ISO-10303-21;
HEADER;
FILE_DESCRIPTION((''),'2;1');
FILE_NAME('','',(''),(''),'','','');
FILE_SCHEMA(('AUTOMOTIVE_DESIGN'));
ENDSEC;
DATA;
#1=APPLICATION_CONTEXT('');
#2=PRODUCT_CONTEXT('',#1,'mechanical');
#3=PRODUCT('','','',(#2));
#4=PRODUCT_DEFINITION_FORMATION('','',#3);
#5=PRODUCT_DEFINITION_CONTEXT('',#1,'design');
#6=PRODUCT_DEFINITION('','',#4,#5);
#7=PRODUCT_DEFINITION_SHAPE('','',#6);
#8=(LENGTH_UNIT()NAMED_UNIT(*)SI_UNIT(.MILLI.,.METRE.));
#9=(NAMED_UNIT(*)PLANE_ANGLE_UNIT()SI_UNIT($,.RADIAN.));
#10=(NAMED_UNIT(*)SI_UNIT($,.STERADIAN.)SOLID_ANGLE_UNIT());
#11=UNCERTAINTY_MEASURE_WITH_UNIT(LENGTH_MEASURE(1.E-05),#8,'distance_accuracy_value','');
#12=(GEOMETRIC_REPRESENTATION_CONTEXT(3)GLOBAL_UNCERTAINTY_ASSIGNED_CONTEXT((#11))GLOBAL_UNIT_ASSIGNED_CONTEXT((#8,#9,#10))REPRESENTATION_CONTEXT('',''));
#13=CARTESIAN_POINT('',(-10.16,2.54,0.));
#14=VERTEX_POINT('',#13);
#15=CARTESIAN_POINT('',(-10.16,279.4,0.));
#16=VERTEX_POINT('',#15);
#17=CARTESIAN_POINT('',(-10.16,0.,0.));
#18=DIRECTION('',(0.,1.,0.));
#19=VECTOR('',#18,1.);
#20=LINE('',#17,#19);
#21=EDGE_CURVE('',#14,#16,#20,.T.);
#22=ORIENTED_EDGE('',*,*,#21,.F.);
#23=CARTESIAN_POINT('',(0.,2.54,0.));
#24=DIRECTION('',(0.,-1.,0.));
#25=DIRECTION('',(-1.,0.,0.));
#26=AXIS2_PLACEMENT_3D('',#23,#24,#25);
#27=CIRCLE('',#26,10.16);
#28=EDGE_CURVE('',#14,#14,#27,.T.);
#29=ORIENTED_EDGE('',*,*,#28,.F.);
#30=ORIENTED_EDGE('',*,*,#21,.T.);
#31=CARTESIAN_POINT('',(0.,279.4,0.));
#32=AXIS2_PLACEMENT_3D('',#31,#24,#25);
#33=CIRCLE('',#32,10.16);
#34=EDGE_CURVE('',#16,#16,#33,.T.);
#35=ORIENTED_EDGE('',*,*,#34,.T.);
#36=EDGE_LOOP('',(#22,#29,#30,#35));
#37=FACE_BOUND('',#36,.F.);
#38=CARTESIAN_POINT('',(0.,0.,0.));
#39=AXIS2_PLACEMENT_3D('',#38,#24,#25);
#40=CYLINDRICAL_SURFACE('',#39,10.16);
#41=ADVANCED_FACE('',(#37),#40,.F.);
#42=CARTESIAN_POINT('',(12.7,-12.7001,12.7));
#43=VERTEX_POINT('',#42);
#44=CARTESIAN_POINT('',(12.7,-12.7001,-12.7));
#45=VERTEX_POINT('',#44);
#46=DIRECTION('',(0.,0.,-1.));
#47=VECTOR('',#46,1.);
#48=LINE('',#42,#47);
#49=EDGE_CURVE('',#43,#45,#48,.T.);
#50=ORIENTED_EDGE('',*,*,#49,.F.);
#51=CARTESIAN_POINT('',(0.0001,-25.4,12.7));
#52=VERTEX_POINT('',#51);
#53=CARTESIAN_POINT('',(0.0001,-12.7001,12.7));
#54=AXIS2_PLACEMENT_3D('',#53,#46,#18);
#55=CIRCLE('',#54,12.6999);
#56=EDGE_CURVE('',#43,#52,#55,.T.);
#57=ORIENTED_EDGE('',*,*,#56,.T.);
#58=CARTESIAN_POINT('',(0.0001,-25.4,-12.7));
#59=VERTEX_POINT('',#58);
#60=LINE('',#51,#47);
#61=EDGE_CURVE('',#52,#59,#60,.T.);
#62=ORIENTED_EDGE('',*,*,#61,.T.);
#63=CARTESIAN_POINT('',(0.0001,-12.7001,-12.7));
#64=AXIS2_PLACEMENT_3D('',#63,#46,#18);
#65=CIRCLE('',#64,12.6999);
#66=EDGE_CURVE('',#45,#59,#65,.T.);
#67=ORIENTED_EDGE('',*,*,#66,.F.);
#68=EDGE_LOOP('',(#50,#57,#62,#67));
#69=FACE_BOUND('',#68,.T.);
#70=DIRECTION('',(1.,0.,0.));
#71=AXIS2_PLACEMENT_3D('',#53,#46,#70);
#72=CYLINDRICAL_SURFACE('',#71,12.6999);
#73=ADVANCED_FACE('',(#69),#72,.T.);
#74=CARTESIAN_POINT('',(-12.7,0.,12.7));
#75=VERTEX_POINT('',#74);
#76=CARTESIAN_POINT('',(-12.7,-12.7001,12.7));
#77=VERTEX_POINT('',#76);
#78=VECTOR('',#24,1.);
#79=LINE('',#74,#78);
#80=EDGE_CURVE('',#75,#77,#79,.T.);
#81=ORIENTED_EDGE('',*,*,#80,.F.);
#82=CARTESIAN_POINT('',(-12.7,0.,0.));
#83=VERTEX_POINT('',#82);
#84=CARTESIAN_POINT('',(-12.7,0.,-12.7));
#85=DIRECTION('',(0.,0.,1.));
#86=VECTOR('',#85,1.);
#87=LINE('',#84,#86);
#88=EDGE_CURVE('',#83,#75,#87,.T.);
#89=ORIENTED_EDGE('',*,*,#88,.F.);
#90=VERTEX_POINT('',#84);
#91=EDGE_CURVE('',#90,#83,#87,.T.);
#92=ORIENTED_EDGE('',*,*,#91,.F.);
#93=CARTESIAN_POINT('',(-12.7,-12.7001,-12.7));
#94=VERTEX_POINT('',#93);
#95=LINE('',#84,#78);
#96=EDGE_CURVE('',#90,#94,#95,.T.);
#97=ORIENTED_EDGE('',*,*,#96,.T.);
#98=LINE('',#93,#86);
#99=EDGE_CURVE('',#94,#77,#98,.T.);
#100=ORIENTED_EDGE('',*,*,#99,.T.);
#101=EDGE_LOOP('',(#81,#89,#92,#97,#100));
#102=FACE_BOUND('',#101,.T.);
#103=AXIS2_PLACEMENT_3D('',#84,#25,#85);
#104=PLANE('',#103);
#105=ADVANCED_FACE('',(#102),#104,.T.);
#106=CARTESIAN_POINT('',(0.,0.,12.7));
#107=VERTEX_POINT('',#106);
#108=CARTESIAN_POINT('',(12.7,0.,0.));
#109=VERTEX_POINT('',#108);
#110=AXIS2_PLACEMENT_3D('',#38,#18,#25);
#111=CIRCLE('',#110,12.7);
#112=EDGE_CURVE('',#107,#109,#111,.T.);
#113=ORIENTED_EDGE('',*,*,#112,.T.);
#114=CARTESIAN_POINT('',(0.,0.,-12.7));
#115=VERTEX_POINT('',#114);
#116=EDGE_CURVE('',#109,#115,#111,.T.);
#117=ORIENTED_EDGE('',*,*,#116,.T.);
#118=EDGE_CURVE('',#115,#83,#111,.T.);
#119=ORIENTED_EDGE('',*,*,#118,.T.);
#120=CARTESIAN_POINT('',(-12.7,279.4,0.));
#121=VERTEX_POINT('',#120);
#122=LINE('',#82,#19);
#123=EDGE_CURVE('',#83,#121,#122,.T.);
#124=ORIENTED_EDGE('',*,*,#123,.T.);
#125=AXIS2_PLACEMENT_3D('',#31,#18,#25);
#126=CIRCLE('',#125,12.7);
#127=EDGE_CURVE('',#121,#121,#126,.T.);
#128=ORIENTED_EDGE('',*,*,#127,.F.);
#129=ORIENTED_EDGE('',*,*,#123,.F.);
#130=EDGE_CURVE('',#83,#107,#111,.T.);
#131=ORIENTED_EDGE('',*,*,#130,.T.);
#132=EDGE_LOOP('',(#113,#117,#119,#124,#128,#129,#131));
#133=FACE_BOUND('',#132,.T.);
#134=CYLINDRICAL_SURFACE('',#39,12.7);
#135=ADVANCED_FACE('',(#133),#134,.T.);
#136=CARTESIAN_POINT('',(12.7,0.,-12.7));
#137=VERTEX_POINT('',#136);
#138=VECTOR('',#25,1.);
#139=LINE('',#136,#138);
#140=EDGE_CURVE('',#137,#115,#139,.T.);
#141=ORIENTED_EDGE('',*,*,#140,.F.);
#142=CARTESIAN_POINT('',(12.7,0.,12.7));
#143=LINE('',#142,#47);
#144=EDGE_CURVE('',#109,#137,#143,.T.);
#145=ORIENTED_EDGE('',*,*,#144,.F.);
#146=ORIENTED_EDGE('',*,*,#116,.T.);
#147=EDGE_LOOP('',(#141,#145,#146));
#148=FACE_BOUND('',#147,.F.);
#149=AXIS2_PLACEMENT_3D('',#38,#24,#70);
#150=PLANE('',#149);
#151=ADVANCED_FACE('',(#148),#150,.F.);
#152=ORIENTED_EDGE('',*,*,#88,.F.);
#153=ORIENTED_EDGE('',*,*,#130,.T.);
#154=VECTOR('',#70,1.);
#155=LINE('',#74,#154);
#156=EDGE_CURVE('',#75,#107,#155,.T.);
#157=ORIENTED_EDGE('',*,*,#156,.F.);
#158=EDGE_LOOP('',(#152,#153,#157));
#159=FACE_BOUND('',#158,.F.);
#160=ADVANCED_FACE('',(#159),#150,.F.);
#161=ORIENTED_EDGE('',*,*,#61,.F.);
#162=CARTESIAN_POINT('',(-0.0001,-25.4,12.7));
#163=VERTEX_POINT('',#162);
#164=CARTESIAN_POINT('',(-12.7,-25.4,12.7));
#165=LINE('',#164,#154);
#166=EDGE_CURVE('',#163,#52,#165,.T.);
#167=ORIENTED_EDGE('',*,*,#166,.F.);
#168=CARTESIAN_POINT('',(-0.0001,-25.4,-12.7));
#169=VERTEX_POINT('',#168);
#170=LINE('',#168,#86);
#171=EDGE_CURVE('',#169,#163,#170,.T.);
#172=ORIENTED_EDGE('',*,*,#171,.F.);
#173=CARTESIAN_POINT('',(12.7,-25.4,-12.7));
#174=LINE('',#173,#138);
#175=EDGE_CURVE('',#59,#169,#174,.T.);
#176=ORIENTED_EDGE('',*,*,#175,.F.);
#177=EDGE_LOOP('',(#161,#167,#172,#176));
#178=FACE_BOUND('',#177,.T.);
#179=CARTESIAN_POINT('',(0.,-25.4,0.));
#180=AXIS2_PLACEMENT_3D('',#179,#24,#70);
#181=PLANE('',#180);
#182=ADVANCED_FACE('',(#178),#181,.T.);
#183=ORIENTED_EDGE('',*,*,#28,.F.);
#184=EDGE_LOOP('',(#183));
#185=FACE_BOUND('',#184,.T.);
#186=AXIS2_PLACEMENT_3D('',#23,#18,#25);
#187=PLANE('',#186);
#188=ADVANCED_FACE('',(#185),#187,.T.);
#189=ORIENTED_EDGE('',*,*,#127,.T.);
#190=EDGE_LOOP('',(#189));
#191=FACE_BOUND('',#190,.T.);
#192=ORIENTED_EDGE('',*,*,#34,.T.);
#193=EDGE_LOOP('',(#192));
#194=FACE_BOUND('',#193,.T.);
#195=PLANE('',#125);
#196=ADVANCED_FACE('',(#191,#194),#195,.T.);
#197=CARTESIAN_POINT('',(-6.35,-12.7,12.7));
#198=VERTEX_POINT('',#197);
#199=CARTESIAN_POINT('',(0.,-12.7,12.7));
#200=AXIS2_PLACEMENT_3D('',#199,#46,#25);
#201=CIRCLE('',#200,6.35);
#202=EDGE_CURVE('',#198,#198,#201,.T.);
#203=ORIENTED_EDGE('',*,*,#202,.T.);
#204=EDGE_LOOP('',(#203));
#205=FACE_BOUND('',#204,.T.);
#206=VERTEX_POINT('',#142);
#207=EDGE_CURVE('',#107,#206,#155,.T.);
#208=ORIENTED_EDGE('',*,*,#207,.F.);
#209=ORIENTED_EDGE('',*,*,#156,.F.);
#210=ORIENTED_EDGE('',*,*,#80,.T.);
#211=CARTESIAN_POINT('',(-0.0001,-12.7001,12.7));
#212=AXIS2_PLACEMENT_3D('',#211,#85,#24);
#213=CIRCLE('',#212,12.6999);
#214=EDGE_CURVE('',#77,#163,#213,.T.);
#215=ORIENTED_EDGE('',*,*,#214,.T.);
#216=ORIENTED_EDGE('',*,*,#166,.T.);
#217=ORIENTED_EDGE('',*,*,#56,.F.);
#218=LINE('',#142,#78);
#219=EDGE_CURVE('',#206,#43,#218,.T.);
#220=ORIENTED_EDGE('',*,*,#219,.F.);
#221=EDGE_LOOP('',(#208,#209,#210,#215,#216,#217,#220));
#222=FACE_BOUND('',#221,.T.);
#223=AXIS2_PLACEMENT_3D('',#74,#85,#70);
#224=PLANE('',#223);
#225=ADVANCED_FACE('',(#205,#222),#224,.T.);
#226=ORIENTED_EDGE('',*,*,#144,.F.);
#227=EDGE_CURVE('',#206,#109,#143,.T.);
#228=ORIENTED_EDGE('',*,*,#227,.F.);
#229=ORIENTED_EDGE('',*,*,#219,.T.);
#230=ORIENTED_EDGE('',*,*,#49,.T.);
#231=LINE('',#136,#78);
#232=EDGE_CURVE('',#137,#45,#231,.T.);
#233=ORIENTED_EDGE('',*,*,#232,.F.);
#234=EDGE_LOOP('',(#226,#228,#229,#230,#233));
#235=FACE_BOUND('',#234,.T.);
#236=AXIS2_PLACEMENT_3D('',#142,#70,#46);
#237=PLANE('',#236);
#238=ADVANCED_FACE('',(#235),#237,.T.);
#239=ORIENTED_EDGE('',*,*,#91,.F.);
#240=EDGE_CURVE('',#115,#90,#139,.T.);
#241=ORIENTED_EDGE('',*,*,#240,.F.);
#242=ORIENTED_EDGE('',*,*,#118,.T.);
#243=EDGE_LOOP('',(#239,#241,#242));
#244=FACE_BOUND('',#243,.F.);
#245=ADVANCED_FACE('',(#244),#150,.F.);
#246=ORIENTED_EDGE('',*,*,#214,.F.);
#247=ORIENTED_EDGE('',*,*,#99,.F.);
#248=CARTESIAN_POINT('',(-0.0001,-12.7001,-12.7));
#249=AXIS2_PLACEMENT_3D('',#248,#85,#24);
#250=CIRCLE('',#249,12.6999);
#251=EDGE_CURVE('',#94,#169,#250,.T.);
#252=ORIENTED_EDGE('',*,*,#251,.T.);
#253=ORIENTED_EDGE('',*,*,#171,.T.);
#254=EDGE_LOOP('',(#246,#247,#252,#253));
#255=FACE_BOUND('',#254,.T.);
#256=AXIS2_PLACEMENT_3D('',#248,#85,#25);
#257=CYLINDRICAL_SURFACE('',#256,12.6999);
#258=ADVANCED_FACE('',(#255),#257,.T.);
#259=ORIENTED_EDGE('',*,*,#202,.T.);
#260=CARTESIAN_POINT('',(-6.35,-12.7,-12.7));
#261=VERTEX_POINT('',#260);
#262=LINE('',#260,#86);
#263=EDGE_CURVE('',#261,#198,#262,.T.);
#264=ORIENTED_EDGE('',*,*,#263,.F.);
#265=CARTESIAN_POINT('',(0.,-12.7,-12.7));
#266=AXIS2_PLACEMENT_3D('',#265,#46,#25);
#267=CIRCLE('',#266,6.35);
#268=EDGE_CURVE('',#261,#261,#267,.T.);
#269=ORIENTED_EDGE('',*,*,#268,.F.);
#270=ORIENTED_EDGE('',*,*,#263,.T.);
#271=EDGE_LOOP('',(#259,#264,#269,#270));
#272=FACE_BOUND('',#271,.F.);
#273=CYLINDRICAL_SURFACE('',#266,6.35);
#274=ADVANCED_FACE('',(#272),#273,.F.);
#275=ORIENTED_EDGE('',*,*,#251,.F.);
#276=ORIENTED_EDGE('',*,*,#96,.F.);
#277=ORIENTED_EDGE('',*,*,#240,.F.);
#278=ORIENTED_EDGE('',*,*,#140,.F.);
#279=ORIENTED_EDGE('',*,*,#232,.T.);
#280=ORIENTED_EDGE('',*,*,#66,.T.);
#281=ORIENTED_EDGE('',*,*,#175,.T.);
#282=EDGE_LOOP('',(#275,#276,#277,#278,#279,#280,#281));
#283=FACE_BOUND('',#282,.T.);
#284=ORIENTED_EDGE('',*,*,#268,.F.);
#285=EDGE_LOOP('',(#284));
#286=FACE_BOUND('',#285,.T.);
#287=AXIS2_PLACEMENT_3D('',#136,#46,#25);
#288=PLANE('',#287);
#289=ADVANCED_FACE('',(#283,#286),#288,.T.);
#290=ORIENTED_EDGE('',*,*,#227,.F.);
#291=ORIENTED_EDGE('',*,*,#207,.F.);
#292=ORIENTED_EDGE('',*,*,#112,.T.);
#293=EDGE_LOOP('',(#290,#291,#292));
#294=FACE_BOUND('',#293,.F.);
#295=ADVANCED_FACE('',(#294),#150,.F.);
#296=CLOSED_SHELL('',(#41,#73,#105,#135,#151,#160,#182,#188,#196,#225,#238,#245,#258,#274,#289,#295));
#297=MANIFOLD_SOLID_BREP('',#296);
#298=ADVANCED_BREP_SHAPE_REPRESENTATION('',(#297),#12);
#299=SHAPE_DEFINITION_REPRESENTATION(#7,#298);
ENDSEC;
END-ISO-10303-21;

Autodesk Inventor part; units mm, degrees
ref_plane "YZ Plane" through (0, 0, 0) normal (1, 0, 0) x (0, 1, 0)
ref_plane "XZ Plane" through (0, 0, 0) normal (0, 1, 0) x (-1, 0, 0)
ref_plane "XY Plane" through (0, 0, 0) normal (0, 0, 1) x (1, 0, 0)
sketch "Sketch1" plane through (0, 0, 0) normal (0, 1, 0) x (-1, 0, 0)
  circle A0 centre (0, 0) radius 12.7
  dimension "d0" = 25.4
extrude "Extrusion1" add sketch "Sketch1" along normal blind 279.4
shell "Shell1" thickness 2.54 removed faces 1 at (3.6254, 279.4, -0.9542)
sketch "Sketch2" plane through (0, 0, 0) normal (0, -1, 0) x (1, 0, 0)
  line L0 (-12.7, 12.7) -> (12.7, 12.7)
  line L1 (12.7, 12.7) -> (12.7, -12.7)
  line L2 (12.7, -12.7) -> (-12.7, -12.7)
  line L3 (-12.7, -12.7) -> (-12.7, 12.7)
  point P0 (0, 0)
  point P1 (0, 0)
  dimension "d5" = 25.4
  dimension "d6" = 25.4
extrude "Extrusion2" add sketch "Sketch2" along normal blind 25.4
sketch "Sketch3" plane through (12.7, 0, -12.7) normal (0, 0, -1) x (-1, 0, 0)
  line L0 (0, 0) -> (0, -25.4) projected
  line L1 (25.4, 0) -> (25.4, -25.4) projected
  circle A0 centre (12.7, -12.7) radius 6.35
  point P0 (12.7, 0)
  dimension "d9" = 12.7
extrude "Extrusion3" cut sketch "Sketch3" against normal blind 33.3375
fillet "Fillet1" radius 12.7 2 edges at (12.7, -25.4, 0) (-12.7, -25.4, 0)
properties part number "ElevatorCylinderOuter"
